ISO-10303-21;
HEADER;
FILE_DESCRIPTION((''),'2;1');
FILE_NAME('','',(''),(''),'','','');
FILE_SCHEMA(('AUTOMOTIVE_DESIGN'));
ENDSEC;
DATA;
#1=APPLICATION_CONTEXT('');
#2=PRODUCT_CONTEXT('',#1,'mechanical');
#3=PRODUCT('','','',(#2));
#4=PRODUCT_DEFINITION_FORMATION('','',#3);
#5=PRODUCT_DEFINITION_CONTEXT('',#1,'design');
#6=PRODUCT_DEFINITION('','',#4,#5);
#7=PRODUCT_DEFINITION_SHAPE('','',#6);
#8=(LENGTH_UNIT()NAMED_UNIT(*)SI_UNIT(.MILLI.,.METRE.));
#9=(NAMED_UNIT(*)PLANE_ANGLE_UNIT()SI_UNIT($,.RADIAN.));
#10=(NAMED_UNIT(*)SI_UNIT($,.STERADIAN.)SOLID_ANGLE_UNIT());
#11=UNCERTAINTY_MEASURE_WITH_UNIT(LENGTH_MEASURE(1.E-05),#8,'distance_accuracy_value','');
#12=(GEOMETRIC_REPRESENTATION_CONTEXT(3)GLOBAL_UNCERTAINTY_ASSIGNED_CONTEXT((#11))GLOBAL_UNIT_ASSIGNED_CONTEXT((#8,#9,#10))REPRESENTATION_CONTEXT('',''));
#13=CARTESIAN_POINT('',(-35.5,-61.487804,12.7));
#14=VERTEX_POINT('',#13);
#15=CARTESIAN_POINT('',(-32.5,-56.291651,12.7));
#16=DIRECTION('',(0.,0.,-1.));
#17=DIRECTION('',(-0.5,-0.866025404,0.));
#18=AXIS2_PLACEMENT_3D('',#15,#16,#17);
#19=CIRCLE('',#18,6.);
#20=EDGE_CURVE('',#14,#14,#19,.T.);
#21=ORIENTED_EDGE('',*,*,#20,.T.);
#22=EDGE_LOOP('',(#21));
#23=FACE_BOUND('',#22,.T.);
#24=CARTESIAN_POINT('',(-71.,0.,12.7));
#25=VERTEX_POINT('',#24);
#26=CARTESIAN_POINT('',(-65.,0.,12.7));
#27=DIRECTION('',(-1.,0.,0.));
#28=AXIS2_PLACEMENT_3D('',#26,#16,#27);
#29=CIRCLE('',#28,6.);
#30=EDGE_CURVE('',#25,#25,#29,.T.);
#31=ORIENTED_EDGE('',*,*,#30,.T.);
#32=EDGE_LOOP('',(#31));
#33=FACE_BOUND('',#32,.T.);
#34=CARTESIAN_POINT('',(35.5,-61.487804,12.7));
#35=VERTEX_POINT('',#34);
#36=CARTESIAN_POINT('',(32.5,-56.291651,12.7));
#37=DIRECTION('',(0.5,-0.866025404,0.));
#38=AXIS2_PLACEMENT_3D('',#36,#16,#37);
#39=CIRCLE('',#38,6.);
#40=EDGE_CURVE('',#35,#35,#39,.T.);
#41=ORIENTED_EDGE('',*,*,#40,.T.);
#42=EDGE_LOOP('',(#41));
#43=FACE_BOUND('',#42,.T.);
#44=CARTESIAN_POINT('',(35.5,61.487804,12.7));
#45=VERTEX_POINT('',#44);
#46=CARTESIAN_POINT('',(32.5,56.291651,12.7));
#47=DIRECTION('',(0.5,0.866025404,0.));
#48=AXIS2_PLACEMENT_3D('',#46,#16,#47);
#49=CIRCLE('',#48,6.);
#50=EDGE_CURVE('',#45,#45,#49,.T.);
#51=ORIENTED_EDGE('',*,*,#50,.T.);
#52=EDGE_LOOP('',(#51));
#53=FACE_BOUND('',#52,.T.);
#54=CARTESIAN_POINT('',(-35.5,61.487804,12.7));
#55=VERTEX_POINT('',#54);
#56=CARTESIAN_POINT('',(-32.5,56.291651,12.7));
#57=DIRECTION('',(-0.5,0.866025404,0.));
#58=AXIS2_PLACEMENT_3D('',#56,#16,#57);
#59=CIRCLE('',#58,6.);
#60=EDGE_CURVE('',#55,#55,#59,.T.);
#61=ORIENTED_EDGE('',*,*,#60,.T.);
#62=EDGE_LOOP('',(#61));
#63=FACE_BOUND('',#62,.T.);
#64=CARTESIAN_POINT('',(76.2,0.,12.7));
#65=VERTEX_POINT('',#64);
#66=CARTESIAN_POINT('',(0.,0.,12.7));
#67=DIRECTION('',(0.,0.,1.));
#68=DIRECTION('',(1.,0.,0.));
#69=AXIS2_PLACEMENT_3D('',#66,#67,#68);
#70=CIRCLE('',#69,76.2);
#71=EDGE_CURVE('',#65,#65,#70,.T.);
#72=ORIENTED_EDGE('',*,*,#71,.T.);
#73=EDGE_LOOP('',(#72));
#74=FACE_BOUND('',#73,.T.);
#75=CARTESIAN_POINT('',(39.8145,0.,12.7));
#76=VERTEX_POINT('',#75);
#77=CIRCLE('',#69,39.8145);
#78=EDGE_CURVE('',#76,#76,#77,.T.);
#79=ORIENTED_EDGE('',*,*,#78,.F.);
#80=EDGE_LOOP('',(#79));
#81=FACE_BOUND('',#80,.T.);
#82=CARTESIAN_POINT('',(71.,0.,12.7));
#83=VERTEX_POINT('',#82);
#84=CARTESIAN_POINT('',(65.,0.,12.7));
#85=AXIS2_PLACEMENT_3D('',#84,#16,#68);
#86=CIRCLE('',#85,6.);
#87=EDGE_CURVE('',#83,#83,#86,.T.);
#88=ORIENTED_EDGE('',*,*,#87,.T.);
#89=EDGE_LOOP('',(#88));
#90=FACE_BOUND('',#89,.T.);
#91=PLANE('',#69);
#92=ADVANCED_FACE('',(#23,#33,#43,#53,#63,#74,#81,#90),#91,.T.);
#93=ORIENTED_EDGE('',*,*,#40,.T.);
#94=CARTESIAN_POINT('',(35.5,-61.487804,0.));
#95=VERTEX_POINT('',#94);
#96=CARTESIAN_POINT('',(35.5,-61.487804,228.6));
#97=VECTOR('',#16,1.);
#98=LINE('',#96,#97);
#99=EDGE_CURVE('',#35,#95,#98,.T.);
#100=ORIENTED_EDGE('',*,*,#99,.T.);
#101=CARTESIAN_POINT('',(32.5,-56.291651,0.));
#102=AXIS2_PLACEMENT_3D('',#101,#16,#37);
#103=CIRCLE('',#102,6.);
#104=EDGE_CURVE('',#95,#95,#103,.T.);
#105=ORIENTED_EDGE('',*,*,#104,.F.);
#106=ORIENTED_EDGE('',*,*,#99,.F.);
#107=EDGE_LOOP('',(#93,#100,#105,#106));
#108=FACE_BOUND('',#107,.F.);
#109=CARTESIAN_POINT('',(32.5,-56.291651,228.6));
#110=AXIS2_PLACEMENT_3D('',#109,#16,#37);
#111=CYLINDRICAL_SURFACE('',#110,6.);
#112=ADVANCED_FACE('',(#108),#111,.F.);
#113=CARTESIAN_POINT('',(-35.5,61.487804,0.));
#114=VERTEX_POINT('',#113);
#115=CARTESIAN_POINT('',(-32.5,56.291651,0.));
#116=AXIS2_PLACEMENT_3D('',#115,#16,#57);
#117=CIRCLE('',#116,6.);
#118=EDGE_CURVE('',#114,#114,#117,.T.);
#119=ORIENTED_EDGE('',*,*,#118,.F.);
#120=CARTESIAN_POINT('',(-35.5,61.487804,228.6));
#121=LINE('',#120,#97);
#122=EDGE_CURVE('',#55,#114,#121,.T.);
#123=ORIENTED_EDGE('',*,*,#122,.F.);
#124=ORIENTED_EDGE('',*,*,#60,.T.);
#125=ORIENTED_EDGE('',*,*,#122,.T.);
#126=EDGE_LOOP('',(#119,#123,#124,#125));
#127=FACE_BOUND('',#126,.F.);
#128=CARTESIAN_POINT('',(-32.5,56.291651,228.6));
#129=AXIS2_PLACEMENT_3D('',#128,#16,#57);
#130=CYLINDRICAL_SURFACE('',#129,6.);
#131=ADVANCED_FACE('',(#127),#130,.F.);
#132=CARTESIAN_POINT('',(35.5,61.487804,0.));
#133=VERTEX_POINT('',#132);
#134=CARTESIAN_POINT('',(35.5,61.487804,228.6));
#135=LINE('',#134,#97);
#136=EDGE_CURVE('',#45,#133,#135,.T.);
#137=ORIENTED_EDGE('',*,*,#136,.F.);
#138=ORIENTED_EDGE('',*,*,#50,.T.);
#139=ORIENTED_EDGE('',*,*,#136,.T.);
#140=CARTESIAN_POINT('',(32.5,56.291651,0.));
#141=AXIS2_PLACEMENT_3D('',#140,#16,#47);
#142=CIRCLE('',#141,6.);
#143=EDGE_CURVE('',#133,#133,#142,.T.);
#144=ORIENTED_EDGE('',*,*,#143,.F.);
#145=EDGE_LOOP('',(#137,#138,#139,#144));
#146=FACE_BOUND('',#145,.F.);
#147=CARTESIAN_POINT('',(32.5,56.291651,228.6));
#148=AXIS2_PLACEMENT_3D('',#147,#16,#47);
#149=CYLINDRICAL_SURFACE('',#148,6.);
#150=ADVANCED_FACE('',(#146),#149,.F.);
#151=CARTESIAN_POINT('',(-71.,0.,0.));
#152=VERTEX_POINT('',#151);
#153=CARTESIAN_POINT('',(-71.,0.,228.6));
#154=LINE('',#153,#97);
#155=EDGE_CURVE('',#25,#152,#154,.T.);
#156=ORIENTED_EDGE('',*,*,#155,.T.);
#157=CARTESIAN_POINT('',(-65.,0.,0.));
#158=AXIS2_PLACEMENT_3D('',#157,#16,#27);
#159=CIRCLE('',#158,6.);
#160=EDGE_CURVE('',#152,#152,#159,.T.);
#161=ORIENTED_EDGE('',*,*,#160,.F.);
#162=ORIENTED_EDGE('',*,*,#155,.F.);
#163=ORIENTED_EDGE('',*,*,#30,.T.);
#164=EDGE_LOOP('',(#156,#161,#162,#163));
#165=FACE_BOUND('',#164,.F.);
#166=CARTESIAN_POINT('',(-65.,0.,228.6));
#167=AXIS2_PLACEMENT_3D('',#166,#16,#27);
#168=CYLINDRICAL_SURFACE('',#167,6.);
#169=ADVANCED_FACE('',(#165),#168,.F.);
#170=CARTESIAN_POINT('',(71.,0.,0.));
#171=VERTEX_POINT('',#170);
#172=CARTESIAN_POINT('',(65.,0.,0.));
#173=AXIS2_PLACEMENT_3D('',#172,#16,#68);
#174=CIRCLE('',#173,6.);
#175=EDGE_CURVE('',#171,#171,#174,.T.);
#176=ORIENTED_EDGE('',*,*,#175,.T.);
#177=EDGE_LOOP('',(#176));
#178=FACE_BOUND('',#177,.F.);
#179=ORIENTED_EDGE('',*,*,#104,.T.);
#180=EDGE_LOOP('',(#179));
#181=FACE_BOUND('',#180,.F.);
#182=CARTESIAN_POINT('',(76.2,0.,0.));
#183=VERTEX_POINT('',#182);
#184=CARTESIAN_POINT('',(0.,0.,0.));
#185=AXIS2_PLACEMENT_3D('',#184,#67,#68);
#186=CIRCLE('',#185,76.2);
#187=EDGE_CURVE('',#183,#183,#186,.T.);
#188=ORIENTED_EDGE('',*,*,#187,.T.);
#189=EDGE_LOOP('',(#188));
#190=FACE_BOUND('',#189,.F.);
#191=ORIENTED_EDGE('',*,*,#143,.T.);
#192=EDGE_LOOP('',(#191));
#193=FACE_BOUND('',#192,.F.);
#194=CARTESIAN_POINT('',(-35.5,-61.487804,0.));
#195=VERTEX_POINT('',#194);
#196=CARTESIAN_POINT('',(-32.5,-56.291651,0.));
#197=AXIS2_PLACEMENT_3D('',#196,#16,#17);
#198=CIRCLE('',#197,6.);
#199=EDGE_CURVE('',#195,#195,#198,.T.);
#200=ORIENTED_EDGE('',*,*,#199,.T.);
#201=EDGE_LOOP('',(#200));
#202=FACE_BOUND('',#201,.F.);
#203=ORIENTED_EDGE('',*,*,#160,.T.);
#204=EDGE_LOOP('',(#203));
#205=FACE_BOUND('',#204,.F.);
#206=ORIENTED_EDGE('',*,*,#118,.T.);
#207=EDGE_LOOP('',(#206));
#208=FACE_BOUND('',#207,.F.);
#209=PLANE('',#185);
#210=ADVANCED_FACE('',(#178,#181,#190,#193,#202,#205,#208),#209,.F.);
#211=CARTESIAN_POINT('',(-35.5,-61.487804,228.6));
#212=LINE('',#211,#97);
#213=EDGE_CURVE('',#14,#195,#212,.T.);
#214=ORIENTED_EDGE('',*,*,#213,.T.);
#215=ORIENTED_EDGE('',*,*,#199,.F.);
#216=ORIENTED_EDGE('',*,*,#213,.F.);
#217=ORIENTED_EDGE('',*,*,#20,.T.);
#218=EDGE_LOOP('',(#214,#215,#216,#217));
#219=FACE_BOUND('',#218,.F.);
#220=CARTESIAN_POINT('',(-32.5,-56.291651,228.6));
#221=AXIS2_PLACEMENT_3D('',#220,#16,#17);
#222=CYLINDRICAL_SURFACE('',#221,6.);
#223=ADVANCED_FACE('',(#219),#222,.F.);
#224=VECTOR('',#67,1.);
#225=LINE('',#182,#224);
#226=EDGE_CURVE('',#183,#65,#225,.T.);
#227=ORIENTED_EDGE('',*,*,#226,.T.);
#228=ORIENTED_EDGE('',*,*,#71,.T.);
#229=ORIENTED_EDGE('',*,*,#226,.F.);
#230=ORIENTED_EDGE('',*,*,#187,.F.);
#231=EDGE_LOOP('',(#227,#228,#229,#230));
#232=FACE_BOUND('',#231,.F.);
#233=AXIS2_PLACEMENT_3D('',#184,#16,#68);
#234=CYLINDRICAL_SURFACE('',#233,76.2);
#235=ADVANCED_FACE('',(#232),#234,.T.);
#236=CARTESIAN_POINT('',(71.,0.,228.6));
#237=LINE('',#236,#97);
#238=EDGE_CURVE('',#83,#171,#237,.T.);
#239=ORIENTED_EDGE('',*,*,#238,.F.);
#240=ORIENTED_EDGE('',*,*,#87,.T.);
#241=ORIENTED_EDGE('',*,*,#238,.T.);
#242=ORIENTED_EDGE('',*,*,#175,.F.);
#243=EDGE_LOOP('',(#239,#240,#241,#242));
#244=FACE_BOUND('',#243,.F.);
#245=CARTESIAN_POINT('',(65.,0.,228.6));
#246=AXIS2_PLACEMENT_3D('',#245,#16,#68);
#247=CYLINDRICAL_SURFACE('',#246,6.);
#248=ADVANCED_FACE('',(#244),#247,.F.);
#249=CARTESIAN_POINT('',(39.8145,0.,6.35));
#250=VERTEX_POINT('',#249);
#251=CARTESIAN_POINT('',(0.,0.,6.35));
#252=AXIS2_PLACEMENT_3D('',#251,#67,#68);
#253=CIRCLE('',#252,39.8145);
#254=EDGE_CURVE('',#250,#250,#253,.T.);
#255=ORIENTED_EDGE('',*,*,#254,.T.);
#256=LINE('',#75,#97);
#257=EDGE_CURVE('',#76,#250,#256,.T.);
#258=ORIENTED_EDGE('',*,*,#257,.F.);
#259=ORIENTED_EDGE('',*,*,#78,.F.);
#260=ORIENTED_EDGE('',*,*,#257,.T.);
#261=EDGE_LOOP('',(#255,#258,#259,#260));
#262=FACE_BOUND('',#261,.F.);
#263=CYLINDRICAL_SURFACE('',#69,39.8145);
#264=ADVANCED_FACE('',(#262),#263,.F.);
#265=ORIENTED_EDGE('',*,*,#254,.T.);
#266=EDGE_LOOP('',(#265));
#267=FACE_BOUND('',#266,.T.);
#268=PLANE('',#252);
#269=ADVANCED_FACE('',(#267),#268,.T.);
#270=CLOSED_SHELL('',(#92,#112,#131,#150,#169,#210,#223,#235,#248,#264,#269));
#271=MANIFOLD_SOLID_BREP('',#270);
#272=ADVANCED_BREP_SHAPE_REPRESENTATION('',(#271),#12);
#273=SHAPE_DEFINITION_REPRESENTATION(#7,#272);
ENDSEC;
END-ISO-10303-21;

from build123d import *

# Parameters (mm, degrees)
F0_R            = 76.2
F1_DEPTH        = 12.7
F3_D            = 12
F3_COPIES_COUNT = 6
F4_R            = 39.8145
F5_DEPTH        = 6.35


# Not quite as in the source:
# - a pattern or mirror of a feature is missing from the dataset's text; its kind, count and spacing are read off the source's solid


with BuildPart() as f1:
    # F0 (on Top) → F1 (new body)
    with BuildSketch(Plane.XY):
        Circle(F0_R)
    extrude(amount=F1_DEPTH)

    # F3 (through all)
    with Locations(Plane.XY.offset(12.7)):
        with Locations((-65, 0)):
            f3 = Hole(F3_D / 2)

    # F3_copies: F3 ×6 about axis
    f3_copies_axis = Axis((0, 0, 0), (0, 0, 1))
    for i in range(1, F3_COPIES_COUNT):
        add(f3.rotate(f3_copies_axis, i * 360 / F3_COPIES_COUNT), mode=Mode.SUBTRACT)

    # F4 (on face) → F5 (cut)
    with BuildSketch(Plane.XY.offset(12.7)):
        Circle(F4_R)
    extrude(amount=-F5_DEPTH, mode=Mode.SUBTRACT)


solid = f1.part
